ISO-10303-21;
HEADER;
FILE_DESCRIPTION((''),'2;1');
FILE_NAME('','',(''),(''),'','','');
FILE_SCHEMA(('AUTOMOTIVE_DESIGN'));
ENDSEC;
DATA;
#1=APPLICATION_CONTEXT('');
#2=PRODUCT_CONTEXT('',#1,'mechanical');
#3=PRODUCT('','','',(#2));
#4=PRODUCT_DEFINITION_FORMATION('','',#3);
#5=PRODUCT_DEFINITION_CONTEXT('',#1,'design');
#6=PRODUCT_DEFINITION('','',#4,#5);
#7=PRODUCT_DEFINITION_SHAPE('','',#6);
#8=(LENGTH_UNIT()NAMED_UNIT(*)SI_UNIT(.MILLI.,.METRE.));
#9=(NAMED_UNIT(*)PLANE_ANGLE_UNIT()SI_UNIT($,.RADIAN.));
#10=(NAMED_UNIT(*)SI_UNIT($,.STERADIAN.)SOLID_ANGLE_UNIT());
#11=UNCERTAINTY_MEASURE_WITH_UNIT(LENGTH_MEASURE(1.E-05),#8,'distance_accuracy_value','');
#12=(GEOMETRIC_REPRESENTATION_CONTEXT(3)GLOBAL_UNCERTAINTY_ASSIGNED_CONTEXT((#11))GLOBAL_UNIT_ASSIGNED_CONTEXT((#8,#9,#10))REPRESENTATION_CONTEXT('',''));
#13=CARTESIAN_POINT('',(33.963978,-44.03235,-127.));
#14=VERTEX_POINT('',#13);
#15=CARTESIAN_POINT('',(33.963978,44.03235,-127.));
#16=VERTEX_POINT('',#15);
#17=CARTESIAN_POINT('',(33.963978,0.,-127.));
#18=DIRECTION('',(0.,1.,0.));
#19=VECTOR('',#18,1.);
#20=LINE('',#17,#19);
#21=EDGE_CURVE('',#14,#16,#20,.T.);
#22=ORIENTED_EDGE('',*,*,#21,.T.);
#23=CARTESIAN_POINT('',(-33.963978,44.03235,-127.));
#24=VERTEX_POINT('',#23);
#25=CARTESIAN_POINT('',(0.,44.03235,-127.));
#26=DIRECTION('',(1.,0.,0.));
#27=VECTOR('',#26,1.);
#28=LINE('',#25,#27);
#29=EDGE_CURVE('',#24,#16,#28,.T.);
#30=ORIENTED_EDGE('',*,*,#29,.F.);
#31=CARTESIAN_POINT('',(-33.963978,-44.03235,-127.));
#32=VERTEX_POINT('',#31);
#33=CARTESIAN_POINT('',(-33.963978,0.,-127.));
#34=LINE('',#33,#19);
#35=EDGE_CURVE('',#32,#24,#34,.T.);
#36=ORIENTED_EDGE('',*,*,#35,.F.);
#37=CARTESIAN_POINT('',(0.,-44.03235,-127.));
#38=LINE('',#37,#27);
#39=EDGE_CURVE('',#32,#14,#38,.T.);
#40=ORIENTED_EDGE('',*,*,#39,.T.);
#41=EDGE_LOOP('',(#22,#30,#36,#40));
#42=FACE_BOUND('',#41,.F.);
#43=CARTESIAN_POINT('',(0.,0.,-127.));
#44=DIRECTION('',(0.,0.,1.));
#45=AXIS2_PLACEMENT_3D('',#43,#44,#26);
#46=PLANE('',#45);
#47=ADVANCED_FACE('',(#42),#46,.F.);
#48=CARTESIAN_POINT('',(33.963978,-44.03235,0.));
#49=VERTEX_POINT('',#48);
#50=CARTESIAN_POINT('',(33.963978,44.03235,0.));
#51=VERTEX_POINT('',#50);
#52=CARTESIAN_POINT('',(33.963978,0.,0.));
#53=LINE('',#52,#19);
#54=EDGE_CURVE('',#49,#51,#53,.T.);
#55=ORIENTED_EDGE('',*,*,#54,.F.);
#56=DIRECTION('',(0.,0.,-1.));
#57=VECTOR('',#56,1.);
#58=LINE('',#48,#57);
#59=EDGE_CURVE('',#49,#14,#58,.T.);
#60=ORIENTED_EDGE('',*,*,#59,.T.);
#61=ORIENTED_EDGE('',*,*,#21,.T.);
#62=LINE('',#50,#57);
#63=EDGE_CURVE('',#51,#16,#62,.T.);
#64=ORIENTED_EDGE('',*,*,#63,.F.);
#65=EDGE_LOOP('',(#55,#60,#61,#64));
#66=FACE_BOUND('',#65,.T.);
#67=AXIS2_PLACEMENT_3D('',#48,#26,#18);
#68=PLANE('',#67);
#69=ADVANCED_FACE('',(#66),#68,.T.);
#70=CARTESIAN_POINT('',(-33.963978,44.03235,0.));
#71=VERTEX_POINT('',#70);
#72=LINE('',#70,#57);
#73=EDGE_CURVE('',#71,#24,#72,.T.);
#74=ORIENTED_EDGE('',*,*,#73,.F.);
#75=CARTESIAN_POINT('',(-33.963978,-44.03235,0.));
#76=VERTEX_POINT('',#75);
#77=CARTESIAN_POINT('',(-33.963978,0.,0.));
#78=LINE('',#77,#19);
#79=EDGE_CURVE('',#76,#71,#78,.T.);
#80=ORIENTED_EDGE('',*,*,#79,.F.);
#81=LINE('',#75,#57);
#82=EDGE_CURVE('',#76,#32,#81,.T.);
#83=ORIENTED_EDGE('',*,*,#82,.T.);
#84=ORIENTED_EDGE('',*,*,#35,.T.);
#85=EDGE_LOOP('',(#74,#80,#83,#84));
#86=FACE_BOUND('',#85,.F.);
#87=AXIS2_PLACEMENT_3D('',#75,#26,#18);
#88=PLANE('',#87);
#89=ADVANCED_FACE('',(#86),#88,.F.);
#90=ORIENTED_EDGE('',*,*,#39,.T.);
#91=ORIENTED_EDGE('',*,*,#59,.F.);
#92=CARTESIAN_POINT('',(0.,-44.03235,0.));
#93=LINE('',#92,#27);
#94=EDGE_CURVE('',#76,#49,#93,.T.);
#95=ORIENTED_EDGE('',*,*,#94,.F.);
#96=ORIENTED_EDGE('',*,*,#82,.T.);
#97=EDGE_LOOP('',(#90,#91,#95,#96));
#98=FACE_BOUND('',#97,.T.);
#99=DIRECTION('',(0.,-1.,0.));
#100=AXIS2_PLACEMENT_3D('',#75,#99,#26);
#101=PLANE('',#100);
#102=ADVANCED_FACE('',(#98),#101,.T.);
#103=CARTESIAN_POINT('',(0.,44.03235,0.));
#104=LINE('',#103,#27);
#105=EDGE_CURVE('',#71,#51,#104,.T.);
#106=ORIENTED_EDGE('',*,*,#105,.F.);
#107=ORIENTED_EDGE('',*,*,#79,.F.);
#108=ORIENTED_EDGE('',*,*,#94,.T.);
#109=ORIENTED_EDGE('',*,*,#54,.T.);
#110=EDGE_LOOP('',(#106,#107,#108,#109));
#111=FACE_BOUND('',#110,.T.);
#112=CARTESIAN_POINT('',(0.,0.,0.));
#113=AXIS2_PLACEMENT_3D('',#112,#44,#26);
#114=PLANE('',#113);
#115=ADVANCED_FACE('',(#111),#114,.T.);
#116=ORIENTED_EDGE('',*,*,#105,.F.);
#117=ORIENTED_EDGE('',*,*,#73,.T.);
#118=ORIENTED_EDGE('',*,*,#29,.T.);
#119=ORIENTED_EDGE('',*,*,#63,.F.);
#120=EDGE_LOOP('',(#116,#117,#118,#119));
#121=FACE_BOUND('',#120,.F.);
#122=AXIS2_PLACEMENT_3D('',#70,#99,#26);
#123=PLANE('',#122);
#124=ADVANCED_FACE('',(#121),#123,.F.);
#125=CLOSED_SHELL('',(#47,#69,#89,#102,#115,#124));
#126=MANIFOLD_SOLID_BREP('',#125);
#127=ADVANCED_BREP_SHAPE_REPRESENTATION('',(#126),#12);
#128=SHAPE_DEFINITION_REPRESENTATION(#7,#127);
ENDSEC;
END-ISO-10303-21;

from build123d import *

# Parameters (mm, degrees)
F0_W     = 67.9279565811
F0_H     = 88.0647003651
F1_DEPTH = 127


# Not quite as in the source:
# - a feature of the source that left no trace in its solid (it failed there, or was rolled back) is left out


with BuildPart() as f1:
    # F0 (on Top) → F1 (new body)
    with BuildSketch(Plane.XY):
        Rectangle(F0_W, F0_H)
    extrude(amount=-F1_DEPTH)


solid = f1.part
